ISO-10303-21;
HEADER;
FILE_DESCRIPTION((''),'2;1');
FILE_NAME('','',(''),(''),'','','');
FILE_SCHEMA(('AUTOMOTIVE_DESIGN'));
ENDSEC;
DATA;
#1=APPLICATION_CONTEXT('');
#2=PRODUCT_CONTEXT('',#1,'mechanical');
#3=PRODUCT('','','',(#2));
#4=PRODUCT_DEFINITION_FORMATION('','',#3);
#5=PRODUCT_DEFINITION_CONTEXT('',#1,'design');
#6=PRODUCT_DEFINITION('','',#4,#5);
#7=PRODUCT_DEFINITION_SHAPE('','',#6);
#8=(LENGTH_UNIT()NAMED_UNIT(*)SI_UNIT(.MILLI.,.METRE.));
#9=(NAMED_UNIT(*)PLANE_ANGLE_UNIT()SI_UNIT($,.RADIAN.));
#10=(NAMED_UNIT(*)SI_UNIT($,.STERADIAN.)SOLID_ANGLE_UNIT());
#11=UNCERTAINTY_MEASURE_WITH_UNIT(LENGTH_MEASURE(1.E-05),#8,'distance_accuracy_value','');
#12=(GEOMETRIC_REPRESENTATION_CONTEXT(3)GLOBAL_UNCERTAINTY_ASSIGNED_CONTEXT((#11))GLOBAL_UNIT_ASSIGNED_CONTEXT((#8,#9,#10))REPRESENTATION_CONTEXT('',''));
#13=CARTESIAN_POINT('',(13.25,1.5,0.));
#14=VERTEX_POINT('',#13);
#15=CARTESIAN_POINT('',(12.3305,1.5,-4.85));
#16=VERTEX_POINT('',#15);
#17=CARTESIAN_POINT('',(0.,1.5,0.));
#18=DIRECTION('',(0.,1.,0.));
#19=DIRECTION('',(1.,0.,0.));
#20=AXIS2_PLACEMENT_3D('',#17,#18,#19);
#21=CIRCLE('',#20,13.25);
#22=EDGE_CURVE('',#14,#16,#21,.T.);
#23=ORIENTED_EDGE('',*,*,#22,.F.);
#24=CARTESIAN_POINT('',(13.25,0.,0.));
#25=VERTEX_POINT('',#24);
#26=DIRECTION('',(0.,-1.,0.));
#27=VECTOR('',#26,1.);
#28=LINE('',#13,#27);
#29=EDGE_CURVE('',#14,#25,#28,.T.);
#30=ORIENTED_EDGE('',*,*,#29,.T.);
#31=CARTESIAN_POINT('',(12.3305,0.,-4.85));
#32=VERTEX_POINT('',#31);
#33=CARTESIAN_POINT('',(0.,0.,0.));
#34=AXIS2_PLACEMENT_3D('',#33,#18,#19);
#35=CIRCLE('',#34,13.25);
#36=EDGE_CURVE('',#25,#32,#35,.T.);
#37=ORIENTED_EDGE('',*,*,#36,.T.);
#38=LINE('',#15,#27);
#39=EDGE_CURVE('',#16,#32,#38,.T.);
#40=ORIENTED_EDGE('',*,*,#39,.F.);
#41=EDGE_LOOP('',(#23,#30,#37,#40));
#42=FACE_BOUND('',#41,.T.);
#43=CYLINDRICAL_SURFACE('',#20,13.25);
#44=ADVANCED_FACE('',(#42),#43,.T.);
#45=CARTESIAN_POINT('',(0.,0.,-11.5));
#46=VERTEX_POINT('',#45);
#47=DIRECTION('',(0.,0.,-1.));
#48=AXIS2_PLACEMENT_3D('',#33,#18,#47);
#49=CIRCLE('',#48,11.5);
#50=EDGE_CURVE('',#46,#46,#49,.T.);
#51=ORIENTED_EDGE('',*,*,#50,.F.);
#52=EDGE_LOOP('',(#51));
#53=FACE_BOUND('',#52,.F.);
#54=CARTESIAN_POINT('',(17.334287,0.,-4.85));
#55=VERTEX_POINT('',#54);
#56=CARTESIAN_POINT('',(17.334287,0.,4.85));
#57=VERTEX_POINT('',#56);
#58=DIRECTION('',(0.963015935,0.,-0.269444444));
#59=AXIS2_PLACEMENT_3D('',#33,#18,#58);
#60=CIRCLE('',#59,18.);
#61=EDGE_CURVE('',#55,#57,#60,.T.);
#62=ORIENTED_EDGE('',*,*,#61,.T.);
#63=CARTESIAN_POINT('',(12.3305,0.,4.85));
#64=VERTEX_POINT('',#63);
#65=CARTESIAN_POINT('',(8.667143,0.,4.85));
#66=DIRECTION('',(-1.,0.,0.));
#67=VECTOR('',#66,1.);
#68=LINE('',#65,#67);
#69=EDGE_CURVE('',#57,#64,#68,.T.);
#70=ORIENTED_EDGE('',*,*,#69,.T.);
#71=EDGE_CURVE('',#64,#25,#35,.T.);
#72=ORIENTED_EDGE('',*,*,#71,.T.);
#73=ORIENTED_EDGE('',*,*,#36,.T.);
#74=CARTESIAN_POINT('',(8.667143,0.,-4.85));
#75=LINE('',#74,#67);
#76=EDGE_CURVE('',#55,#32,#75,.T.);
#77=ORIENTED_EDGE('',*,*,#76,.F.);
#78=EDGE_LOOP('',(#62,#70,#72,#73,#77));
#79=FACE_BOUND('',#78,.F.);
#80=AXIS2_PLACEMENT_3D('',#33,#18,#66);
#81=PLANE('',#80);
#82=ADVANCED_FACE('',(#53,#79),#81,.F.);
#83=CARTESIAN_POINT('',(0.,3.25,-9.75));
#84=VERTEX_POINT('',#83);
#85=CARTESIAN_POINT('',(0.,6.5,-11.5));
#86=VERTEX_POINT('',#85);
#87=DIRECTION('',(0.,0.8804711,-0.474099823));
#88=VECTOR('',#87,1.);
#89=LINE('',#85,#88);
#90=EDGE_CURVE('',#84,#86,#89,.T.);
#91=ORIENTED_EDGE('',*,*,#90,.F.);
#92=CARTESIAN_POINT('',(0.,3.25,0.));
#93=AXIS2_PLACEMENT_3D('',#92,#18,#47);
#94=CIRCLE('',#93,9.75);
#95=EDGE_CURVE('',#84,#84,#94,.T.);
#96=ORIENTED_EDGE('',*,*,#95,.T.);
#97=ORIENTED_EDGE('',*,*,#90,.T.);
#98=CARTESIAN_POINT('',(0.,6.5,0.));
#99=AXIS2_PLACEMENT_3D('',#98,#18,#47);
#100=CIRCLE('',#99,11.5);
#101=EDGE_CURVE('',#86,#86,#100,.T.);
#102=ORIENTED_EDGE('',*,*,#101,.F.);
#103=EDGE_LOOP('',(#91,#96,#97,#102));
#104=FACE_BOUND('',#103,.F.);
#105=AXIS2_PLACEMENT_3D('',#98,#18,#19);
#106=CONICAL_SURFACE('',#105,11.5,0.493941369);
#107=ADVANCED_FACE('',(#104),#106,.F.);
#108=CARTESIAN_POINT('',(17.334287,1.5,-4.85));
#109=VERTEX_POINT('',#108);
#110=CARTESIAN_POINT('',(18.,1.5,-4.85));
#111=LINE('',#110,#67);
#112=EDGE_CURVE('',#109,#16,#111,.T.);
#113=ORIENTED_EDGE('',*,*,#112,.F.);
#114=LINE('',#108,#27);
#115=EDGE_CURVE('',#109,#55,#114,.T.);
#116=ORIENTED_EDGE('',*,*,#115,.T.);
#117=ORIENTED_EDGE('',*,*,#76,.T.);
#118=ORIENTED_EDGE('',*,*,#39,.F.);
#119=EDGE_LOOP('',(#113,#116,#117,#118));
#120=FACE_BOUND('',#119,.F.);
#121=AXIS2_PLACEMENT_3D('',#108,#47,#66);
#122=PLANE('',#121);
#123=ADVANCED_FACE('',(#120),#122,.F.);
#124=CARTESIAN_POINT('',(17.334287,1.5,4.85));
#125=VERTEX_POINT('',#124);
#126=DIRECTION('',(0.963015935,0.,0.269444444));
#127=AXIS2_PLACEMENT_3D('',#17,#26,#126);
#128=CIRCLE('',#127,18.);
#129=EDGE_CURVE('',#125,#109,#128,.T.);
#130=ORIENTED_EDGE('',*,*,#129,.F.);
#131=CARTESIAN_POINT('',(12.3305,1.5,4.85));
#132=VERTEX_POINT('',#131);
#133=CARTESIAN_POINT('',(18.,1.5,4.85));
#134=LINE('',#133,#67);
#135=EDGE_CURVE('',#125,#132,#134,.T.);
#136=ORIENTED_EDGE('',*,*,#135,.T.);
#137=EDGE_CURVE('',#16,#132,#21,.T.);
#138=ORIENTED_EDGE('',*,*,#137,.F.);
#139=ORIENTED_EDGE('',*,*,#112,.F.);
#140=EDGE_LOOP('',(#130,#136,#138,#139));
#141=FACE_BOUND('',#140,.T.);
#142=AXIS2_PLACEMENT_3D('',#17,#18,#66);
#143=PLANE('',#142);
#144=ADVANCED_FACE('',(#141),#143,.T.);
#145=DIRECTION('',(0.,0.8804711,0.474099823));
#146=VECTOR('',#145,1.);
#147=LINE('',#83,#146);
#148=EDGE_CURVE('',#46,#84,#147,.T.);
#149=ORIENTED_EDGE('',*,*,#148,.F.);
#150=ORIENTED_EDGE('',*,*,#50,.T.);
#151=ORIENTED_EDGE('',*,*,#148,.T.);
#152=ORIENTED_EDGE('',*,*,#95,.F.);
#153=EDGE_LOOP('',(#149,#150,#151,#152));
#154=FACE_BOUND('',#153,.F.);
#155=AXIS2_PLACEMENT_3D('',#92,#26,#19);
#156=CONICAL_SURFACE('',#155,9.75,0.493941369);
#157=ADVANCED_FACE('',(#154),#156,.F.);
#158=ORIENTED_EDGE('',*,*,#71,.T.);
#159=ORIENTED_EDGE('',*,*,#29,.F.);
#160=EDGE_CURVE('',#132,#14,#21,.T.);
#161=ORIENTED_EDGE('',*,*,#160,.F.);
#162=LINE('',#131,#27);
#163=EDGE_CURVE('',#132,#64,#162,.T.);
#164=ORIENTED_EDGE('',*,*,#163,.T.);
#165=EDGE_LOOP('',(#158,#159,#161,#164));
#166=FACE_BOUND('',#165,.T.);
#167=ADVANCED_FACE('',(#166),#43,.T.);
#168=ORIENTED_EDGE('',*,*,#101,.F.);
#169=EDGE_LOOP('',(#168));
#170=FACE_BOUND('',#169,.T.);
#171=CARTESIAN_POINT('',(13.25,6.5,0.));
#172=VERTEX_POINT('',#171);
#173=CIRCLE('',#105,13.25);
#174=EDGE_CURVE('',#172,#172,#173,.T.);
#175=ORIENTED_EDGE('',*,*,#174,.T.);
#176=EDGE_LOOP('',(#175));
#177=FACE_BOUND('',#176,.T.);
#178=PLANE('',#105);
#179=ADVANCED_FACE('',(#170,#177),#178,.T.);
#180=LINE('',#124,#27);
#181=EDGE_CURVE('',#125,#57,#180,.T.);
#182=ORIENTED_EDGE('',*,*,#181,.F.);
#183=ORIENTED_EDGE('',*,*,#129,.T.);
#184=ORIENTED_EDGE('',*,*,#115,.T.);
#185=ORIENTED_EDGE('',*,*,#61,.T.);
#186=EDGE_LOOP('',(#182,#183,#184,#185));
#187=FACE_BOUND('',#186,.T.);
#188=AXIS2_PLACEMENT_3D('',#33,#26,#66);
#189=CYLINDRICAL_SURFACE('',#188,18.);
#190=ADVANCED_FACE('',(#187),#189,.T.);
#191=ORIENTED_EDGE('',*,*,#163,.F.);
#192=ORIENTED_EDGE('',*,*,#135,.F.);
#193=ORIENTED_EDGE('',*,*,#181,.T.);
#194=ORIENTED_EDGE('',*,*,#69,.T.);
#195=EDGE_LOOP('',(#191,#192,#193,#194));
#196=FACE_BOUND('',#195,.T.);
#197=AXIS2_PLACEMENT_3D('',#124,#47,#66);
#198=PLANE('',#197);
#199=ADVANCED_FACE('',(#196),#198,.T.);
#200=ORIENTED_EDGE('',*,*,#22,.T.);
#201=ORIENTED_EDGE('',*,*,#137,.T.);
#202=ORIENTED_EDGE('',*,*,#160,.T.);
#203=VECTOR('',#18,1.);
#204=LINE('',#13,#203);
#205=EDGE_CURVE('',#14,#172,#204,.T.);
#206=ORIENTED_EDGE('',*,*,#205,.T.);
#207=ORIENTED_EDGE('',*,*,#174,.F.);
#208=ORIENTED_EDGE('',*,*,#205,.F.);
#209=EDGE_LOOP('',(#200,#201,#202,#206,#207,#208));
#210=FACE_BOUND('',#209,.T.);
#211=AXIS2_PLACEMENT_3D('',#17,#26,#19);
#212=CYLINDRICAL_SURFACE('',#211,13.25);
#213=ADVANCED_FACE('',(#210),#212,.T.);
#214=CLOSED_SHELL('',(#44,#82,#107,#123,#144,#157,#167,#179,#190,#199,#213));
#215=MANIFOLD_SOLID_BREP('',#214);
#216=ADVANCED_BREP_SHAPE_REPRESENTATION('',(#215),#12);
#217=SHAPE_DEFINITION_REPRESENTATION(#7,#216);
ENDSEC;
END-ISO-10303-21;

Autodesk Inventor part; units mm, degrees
ref_plane "YZ Plane" through (0, 0, 0) normal (1, 0, 0) x (0, 1, 0)
ref_plane "XZ Plane" through (0, 0, 0) normal (0, 1, 0) x (-1, 0, 0)
ref_plane "XY Plane" through (0, 0, 0) normal (0, 0, 1) x (1, 0, 0)
sketch "Boceto1" plane through (0, 0, 0) normal (0, 1, 0) x (-1, 0, 0)
  circle A0 centre (0, 0) radius 18
  circle A1 centre (0, 0) radius 9.75
  dimension "d0" = 36
  dimension "d1" = 19.5
extrude "Extrusión1" add sketch "Boceto1" along normal blind 1.5
sketch "Boceto2" plane through (0, 1.5, 0) normal (0, 1, 0) x (1, 0, 0)
  circle A0 centre (0, 0) radius 9.75
  circle A1 centre (0, 0) radius 13.25
  dimension "d4" = 26.5
extrude "Extrusión2" add sketch "Boceto2" along normal blind 5
sketch "Boceto3" plane through (0, 1.5, 0) normal (0, 1, 0) x (1, 0, 0)
  circle A0 centre (0, 0) radius 18 projected
  line L0 (18, 0) -> (18, -4.85)
  line L1 (18, -4.85) -> (12.3305, -4.85)
  circle A1 centre (0, 0) radius 13.25 projected
  line L2 (18, 0) -> (18, 4.85)
  line L3 (18, 4.85) -> (12.3305, 4.85)
  point P0 (17.3343, 4.85)
  point P1 (17.3343, -4.85)
  dimension "d7" = 4.85
  dimension "d8" = 4.85
extrude "Extrusión3" cut sketch "Boceto3" against normal through all contours A0 L1 A1 L3 picked at (14.5628, -2.7275)
sketch "Boceto4" plane through (0, 0, 0) normal (0, 0, 1) x (1, 0, 0)
  line L0 (9.75, 6.5) -> (9.75, 0) projected
  line L1 (13.25, 0) -> (13.25, 6.5) projected
  line L2 (13.25, 6.5) -> (9.75, 6.5)
  line L3 (11.5, 6.5) -> (9.75, 3.25)
  line L4 (9.75, 3.25) -> (11.5, 0)
  line L5 (17.3343, 0) -> (-18, 0) projected
  line L6 (11.5, 0) -> (13.25, 0)
  line L7 (11.5, 0) -> (9.75, 0)
  line L8 (9.75, 0) -> (9.75, 6.5)
  line L9 (9.75, 6.5) -> (11.5, 6.5)
  line L10 (13.25, 6.5) -> (-13.25, 6.5) projected
  point P0 (0, 0)
sketch3d "Boceto 3D1"
  arc A0 (9.75, 6.5, 0) -> (0, 6.5, 9.75) centre (0, 6.5, 0) ccw
  arc A1 (0, 6.5, 9.75) -> (-9.75, 6.5, 0) centre (0, 6.5, 0) ccw
  arc A2 (-9.75, 6.5, 0) -> (0, 6.5, -9.75) centre (0, 6.5, 0) ccw
  arc A3 (0, 6.5, -9.75) -> (9.75, 6.5, 0) centre (0, 6.5, 0) ccw
sweep "Barrido1" cut profiles "Boceto4" path "Boceto 3D1" contours L2 L3 L0 | L4 L5 L0
properties part number "Sujección_piezas_sonar"
